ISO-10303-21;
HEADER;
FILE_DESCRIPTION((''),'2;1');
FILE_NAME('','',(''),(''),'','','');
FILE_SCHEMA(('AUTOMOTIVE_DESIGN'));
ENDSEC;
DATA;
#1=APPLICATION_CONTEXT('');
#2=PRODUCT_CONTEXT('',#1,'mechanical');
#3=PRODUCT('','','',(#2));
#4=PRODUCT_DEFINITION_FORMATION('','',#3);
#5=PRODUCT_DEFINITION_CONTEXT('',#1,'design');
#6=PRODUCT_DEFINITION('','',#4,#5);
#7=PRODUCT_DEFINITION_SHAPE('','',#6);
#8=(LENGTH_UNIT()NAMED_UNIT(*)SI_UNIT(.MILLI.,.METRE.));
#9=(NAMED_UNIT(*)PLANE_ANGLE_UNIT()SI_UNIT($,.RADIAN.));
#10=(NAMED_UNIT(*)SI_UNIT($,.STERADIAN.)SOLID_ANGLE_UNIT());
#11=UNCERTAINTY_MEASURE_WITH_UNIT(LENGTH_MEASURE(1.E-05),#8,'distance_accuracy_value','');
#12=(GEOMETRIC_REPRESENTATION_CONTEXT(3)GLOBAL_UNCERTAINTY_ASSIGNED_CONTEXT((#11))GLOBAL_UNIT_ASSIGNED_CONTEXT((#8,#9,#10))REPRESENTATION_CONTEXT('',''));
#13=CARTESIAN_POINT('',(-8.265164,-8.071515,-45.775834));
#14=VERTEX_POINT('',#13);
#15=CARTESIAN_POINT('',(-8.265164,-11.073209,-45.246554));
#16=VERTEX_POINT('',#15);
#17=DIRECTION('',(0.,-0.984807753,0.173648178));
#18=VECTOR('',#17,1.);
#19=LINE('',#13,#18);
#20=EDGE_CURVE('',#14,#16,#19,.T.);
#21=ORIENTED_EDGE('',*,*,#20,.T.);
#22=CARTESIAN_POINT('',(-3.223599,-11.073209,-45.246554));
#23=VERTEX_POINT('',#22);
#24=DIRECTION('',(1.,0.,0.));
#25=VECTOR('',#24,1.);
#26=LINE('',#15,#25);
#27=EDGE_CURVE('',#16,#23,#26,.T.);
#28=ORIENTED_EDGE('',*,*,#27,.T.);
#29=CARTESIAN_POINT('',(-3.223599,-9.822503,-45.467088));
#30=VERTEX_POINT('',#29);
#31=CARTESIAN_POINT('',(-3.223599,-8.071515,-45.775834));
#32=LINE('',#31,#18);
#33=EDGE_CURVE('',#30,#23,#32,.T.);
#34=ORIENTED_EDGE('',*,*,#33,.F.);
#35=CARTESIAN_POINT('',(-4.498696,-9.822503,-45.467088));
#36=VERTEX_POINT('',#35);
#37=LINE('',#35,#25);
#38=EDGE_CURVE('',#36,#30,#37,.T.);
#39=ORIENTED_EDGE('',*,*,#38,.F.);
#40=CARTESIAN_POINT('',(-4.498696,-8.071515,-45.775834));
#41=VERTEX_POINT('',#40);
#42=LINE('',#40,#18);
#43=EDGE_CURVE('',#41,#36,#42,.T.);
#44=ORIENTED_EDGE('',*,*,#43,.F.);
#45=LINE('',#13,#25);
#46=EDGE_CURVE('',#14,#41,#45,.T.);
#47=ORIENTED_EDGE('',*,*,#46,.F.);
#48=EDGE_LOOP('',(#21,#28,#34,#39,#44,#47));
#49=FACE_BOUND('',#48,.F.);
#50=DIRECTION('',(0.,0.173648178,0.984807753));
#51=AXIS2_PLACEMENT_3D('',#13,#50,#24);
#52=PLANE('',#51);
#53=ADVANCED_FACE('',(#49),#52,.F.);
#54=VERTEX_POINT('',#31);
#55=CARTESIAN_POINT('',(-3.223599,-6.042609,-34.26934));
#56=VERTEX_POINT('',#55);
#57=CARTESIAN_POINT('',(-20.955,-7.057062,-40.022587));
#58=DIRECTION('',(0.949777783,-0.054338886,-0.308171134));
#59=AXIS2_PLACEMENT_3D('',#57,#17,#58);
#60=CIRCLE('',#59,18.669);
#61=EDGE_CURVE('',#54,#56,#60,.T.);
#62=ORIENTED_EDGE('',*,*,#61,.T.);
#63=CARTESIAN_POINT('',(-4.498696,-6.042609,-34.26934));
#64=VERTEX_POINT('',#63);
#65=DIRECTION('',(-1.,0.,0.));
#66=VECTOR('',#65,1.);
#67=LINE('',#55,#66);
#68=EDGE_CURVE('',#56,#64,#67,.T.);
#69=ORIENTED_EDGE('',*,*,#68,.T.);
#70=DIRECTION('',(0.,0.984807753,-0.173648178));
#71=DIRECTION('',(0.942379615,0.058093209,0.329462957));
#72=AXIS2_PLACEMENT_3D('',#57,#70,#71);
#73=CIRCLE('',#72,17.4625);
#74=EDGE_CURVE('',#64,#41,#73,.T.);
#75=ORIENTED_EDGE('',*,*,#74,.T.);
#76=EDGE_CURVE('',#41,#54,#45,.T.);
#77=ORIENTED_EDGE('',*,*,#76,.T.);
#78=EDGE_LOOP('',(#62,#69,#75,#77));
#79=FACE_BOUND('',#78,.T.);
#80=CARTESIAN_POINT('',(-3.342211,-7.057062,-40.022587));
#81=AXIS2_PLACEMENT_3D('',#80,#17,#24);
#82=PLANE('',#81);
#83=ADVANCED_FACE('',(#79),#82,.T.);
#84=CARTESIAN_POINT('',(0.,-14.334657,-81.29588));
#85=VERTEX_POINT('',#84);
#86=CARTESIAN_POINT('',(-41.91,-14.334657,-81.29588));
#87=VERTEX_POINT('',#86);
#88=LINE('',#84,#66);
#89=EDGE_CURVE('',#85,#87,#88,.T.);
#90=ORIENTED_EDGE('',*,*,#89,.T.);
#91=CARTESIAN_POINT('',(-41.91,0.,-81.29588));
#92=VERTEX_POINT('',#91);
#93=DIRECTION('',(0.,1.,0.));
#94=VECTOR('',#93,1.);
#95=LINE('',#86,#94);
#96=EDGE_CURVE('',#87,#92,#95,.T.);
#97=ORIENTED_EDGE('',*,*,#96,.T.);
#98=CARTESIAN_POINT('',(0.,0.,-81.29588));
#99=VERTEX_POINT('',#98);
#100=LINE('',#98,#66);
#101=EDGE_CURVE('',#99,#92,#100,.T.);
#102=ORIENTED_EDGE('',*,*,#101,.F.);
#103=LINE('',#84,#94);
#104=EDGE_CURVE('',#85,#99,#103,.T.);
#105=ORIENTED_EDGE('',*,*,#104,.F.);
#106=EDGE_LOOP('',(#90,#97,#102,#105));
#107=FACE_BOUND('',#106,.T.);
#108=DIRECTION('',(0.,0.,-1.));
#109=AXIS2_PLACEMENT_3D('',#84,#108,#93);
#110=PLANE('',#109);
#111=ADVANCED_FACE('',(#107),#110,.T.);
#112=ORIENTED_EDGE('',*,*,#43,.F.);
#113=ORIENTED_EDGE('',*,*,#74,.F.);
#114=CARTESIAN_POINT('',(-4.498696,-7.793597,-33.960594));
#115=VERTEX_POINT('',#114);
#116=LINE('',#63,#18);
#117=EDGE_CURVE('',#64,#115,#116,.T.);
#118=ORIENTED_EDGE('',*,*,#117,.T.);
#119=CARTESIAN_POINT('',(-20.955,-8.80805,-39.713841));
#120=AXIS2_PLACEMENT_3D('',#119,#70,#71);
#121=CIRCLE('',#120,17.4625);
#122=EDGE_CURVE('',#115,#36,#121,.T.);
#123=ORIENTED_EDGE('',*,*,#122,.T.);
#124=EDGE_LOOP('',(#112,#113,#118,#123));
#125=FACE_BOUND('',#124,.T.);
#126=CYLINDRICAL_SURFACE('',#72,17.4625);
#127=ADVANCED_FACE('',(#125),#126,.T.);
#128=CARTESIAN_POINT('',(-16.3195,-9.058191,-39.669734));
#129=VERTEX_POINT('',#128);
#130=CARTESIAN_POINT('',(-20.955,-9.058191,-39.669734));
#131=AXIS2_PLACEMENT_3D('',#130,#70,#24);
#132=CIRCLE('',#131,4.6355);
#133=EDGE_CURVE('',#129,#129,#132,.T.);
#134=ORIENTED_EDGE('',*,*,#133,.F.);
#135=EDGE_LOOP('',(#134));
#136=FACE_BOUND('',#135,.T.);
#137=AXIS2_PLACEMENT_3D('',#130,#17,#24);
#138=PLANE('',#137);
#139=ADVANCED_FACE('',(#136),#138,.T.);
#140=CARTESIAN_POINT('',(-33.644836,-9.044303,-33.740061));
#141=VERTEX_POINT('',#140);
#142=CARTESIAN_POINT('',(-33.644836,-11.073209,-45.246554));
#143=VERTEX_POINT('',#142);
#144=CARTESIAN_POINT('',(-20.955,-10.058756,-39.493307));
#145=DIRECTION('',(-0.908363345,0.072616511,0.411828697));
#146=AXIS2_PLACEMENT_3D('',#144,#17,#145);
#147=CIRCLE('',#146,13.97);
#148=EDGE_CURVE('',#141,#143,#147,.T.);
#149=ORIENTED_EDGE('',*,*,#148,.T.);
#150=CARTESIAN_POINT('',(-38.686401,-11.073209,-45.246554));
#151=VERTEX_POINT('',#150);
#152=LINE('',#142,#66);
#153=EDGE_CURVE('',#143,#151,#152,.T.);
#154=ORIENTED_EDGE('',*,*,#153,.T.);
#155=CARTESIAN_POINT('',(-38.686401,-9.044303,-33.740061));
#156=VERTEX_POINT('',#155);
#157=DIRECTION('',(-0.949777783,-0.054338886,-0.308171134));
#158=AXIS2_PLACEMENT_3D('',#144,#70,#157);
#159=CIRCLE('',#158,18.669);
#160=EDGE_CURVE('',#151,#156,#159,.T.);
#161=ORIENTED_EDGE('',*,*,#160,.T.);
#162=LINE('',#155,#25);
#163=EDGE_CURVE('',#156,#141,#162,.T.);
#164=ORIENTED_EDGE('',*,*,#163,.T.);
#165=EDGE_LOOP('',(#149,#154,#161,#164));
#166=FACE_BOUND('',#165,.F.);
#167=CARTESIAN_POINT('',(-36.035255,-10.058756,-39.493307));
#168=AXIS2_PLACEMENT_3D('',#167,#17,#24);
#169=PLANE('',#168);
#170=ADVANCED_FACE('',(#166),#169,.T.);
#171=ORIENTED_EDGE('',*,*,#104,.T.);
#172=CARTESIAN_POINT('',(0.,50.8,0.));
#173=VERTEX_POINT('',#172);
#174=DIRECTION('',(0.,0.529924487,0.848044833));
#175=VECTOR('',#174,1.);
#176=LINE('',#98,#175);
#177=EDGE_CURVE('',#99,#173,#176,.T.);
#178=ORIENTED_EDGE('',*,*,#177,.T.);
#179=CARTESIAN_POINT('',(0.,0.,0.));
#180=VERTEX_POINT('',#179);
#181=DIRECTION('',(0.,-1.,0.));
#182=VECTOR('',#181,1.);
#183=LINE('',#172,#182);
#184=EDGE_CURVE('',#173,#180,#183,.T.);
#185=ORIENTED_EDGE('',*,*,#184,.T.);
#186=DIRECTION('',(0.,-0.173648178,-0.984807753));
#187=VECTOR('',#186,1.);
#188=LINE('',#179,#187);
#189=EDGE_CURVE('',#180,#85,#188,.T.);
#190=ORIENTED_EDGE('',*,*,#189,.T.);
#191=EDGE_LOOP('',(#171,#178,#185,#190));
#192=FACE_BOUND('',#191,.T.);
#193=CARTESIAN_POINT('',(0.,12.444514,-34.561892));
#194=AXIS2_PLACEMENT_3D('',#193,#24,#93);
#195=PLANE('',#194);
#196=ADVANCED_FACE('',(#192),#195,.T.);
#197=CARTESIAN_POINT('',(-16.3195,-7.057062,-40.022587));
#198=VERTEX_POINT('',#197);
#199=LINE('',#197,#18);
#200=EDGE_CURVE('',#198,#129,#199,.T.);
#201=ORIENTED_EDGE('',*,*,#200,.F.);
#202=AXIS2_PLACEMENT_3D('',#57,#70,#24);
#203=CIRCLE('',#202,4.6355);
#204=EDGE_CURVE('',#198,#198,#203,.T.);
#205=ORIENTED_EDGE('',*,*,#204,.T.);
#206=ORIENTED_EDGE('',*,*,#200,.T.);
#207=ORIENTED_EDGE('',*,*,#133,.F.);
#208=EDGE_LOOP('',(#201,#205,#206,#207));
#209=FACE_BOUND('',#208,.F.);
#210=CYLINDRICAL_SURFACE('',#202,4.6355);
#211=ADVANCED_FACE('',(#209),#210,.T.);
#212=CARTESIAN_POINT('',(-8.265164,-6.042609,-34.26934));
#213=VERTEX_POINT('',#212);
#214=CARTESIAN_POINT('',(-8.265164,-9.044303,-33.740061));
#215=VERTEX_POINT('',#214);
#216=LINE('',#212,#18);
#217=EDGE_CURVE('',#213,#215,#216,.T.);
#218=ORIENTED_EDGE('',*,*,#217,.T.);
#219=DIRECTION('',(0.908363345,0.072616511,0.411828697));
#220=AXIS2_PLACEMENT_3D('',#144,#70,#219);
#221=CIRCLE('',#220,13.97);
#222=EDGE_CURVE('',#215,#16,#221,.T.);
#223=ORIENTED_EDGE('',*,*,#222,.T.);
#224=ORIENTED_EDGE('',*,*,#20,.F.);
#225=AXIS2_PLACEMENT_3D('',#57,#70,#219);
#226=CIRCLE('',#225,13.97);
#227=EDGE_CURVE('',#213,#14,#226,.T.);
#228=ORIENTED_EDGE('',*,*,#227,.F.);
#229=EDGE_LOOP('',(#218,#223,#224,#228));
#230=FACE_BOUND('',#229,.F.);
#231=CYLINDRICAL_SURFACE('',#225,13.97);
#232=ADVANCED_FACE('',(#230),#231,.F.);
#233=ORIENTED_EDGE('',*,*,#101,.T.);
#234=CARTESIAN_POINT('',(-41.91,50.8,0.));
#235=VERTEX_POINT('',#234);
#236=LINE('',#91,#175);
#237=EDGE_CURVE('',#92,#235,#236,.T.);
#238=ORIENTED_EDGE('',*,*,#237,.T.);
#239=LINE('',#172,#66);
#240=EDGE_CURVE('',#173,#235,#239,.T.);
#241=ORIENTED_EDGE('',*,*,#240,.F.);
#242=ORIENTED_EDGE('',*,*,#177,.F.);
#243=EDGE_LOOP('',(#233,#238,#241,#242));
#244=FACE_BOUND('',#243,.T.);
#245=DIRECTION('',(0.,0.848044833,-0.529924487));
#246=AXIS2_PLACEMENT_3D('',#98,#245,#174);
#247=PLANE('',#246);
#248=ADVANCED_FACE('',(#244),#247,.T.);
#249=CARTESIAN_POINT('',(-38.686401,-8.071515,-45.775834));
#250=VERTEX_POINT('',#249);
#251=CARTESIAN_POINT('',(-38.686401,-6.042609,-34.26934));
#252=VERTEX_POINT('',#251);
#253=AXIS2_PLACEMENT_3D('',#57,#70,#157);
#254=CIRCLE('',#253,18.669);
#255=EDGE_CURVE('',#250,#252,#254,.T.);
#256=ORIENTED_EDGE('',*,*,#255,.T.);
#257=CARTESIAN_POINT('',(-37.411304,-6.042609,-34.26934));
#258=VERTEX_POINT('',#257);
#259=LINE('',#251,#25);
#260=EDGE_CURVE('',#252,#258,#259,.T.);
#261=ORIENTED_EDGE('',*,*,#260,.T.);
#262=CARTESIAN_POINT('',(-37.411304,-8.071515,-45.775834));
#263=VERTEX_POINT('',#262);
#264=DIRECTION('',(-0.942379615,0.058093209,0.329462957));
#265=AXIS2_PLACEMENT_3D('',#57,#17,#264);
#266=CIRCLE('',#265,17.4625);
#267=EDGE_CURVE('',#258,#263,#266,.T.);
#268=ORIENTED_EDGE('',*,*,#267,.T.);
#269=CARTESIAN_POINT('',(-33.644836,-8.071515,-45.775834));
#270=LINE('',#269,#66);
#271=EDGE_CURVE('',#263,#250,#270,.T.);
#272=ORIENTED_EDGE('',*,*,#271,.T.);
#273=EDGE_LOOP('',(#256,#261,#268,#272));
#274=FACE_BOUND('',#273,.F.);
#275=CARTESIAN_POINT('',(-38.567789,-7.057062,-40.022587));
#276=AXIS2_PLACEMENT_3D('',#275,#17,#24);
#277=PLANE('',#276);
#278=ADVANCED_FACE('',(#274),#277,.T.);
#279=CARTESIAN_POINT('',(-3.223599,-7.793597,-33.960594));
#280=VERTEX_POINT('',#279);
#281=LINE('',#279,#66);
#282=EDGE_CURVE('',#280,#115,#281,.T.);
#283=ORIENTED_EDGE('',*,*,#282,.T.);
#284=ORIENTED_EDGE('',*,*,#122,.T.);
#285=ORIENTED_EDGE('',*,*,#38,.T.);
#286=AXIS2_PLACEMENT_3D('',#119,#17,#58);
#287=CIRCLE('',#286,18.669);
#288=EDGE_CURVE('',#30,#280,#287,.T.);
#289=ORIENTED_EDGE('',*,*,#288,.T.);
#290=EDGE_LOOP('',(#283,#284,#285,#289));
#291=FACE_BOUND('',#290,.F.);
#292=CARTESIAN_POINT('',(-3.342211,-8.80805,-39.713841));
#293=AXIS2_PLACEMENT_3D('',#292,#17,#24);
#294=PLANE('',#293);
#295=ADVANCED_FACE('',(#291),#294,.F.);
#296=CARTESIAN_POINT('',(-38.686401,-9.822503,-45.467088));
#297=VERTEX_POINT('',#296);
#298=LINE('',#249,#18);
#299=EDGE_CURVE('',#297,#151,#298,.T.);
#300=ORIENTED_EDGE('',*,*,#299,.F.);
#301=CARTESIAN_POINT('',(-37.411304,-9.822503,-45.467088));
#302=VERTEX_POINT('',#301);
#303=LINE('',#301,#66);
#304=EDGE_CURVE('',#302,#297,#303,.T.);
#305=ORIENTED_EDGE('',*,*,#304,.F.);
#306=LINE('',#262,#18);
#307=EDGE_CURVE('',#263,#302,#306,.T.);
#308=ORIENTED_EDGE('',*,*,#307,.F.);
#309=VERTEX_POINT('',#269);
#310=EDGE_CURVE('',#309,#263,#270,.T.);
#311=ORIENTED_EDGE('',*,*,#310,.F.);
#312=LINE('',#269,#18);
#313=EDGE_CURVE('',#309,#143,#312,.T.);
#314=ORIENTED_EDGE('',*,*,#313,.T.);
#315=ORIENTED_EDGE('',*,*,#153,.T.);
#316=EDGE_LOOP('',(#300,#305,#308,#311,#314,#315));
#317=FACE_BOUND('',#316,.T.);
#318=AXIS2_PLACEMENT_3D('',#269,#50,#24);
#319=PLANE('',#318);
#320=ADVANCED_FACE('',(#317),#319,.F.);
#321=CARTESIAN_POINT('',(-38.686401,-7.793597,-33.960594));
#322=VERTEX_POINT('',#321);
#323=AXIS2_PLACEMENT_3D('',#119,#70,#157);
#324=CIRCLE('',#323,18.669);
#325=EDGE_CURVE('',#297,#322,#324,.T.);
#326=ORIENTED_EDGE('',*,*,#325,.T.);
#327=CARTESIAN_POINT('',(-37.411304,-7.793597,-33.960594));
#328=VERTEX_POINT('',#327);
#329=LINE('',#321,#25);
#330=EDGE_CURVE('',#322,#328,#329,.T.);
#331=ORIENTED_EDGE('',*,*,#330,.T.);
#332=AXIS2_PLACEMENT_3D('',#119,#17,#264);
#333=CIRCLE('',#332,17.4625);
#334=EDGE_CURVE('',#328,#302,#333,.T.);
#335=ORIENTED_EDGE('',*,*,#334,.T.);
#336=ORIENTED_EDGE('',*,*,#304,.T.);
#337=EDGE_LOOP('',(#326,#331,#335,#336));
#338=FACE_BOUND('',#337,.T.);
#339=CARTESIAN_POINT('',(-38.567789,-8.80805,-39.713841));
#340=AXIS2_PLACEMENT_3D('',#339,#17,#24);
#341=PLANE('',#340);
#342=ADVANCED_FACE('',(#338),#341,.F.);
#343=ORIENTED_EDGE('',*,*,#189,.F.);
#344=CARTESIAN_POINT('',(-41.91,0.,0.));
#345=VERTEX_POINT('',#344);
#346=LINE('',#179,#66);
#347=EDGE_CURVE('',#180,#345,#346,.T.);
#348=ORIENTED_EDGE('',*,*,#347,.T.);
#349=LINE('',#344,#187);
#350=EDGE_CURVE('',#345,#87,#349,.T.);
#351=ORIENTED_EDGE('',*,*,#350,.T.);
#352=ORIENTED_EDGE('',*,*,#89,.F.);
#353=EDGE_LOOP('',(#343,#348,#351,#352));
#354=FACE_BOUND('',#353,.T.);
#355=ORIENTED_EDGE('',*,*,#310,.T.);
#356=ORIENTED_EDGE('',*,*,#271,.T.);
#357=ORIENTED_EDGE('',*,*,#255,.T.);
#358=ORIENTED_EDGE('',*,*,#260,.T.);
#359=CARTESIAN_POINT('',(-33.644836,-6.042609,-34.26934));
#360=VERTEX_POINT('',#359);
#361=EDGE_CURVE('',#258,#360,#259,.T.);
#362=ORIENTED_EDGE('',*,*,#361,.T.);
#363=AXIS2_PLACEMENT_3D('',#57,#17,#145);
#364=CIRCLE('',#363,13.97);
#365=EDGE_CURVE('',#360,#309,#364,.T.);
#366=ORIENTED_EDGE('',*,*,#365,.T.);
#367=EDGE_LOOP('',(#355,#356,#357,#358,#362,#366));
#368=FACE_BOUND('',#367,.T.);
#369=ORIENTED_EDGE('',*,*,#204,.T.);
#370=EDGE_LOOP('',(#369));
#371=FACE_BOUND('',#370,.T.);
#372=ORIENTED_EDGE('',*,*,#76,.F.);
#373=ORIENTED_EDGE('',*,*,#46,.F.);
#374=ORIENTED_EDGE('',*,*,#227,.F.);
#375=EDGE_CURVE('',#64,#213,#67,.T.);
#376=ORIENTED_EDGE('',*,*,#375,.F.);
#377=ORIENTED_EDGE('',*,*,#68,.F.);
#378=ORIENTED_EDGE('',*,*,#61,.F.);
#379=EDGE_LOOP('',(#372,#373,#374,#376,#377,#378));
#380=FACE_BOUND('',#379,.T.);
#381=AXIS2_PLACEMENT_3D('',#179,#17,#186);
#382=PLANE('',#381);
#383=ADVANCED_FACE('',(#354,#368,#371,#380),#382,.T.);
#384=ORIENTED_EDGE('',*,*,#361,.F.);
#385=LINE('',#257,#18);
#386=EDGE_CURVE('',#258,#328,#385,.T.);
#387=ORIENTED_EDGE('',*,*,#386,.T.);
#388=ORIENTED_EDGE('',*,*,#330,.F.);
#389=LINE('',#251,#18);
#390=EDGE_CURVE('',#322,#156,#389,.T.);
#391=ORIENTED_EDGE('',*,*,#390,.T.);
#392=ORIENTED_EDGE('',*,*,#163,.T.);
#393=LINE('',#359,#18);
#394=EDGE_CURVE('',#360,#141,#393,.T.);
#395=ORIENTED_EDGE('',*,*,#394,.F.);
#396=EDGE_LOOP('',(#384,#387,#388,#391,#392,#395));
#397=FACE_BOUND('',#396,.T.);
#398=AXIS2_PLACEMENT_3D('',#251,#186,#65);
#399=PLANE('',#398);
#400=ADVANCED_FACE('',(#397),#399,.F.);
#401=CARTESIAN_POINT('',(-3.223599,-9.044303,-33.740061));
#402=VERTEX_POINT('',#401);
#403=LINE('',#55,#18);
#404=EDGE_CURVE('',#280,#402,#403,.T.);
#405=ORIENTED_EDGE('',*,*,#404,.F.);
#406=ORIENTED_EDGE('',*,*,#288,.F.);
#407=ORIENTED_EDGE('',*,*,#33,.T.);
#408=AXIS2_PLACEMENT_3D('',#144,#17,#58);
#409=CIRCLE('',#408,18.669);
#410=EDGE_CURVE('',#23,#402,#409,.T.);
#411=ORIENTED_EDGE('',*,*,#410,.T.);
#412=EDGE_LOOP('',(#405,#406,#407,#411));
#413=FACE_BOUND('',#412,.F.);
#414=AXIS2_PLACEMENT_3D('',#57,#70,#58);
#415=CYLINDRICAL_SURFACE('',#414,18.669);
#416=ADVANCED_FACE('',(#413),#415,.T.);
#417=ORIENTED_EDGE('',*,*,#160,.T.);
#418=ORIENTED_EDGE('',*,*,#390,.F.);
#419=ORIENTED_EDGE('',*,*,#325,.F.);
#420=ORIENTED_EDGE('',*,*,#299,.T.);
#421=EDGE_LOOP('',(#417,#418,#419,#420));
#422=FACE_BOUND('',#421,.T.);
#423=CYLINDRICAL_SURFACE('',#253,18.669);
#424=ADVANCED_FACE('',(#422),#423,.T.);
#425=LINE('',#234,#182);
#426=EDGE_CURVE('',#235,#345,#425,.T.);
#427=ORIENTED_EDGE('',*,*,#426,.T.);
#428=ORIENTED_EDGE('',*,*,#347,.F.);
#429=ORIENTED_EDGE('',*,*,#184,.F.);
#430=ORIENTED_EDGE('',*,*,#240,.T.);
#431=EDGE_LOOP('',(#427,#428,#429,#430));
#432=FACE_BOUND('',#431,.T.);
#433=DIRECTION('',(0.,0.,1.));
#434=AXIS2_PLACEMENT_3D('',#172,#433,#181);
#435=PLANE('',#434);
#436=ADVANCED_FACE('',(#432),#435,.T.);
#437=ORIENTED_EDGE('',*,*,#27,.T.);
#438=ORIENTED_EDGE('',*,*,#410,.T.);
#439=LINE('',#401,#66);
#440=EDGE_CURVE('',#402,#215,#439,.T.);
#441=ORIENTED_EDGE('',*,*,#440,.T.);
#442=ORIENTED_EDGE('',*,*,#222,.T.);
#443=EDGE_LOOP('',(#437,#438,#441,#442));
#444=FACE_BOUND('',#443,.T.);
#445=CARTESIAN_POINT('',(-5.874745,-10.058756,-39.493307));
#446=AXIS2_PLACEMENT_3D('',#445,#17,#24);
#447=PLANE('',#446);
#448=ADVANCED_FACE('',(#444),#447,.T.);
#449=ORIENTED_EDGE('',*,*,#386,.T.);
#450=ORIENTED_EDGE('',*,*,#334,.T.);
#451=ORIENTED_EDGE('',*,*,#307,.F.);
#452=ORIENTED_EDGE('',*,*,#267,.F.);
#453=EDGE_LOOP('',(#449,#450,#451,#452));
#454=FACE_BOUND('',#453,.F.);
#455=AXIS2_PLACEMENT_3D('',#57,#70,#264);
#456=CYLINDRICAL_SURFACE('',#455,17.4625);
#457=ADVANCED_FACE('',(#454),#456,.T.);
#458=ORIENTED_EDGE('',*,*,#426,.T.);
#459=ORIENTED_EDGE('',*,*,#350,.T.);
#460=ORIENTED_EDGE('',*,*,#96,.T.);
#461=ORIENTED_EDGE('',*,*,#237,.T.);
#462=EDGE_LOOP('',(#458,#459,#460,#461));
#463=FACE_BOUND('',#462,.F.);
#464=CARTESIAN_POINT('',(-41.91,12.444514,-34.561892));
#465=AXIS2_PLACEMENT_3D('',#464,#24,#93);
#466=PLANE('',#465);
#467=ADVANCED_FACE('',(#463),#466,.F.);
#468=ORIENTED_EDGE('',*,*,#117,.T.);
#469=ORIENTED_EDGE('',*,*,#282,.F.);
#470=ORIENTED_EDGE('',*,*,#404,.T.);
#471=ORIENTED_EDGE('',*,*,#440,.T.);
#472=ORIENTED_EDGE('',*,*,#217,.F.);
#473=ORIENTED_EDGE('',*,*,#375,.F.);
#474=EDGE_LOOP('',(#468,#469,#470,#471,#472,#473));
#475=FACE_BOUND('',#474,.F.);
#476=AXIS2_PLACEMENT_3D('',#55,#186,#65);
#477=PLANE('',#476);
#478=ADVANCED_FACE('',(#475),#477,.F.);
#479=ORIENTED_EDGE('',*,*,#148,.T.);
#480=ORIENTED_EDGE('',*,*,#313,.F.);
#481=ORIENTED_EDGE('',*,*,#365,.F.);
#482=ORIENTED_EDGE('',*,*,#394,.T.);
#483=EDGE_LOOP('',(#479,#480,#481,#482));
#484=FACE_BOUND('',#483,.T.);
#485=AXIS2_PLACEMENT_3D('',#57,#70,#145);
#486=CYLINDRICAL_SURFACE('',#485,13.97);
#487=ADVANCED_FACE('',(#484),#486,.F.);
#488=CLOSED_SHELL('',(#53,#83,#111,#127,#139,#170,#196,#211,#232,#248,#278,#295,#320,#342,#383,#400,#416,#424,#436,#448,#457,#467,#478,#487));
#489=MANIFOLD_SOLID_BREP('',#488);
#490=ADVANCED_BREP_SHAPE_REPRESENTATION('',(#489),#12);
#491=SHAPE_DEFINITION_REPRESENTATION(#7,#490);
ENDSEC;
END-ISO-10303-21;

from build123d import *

# Parameters (mm, degrees)
F1_DEPTH = 41.91
F2_R     = 4.6355
F3_DEPTH = 2.032
F4_DEPTH = 3.048
F5_DEPTH = 1.778


with BuildPart() as f1:
    # F0 (on Right) → F1 (new body)
    with BuildSketch(Plane.YZ):
        Polygon((50.8, 0), (0, 0), (-14.3346570664, -81.2958800112), (0, -81.2958800112), align=None)
    extrude(amount=-F1_DEPTH)

    # F2 (on face) → F3 (join)
    with BuildSketch(Plane(origin=(0, 0, 0), x_dir=(1, 0, 0), z_dir=(0, -0.984807753, 0.1736481777))):
        with Locations((-20.955, -40.64)):
            Circle(F2_R)
    extrude(amount=F3_DEPTH)

    # F2 (on face) → F4 (join)
    with BuildSketch(Plane(origin=(0, 0, 0), x_dir=(1, 0, 0), z_dir=(0, -0.984807753, 0.1736481777))):
        with BuildLine():
            ThreePointArc((-8.2651640673, -34.798), (-6.985, -40.64), (-8.2651640673, -46.482))
            Line((-8.2651640673, -46.482), (-4.4986959724, -46.482))
            ThreePointArc((-4.4986959724, -46.482), (-3.4925, -40.64), (-4.4986959724, -34.798))
            Line((-4.4986959724, -34.798), (-8.2651640673, -34.798))
        make_face()
        with BuildLine():
            ThreePointArc((-4.4986959724, -34.798), (-3.4925, -40.64), (-4.4986959724, -46.482))
            Line((-4.4986959724, -46.482), (-3.2235985607, -46.482))
            ThreePointArc((-3.2235985607, -46.482), (-2.286, -40.64), (-3.2235985607, -34.798))
            Line((-3.2235985607, -34.798), (-4.4986959724, -34.798))
        make_face()
    extrude(amount=F4_DEPTH)

    # F2 (on face) → F5 (cut)
    with BuildSketch(Plane(origin=(0, 0, 0), x_dir=(1, 0, 0), z_dir=(0, -0.984807753, 0.1736481777))):
        with BuildLine():
            ThreePointArc((-4.4986959724, -34.798), (-3.4925, -40.64), (-4.4986959724, -46.482))
            Line((-4.4986959724, -46.482), (-3.2235985607, -46.482))
            ThreePointArc((-3.2235985607, -46.482), (-2.286, -40.64), (-3.2235985607, -34.798))
            Line((-3.2235985607, -34.798), (-4.4986959724, -34.798))
        make_face()
    extrude(amount=F5_DEPTH, mode=Mode.SUBTRACT)

    # F7: F1 across plane


with BuildPart() as f1_1:
    add(f1.part)
    add(f1.part.mirror(Plane(origin=(-20.955, 12.1551143112, -33.0624182644), x_dir=(0, 1, 0), z_dir=(1, 0, 0))))


solid = f1_1.part
